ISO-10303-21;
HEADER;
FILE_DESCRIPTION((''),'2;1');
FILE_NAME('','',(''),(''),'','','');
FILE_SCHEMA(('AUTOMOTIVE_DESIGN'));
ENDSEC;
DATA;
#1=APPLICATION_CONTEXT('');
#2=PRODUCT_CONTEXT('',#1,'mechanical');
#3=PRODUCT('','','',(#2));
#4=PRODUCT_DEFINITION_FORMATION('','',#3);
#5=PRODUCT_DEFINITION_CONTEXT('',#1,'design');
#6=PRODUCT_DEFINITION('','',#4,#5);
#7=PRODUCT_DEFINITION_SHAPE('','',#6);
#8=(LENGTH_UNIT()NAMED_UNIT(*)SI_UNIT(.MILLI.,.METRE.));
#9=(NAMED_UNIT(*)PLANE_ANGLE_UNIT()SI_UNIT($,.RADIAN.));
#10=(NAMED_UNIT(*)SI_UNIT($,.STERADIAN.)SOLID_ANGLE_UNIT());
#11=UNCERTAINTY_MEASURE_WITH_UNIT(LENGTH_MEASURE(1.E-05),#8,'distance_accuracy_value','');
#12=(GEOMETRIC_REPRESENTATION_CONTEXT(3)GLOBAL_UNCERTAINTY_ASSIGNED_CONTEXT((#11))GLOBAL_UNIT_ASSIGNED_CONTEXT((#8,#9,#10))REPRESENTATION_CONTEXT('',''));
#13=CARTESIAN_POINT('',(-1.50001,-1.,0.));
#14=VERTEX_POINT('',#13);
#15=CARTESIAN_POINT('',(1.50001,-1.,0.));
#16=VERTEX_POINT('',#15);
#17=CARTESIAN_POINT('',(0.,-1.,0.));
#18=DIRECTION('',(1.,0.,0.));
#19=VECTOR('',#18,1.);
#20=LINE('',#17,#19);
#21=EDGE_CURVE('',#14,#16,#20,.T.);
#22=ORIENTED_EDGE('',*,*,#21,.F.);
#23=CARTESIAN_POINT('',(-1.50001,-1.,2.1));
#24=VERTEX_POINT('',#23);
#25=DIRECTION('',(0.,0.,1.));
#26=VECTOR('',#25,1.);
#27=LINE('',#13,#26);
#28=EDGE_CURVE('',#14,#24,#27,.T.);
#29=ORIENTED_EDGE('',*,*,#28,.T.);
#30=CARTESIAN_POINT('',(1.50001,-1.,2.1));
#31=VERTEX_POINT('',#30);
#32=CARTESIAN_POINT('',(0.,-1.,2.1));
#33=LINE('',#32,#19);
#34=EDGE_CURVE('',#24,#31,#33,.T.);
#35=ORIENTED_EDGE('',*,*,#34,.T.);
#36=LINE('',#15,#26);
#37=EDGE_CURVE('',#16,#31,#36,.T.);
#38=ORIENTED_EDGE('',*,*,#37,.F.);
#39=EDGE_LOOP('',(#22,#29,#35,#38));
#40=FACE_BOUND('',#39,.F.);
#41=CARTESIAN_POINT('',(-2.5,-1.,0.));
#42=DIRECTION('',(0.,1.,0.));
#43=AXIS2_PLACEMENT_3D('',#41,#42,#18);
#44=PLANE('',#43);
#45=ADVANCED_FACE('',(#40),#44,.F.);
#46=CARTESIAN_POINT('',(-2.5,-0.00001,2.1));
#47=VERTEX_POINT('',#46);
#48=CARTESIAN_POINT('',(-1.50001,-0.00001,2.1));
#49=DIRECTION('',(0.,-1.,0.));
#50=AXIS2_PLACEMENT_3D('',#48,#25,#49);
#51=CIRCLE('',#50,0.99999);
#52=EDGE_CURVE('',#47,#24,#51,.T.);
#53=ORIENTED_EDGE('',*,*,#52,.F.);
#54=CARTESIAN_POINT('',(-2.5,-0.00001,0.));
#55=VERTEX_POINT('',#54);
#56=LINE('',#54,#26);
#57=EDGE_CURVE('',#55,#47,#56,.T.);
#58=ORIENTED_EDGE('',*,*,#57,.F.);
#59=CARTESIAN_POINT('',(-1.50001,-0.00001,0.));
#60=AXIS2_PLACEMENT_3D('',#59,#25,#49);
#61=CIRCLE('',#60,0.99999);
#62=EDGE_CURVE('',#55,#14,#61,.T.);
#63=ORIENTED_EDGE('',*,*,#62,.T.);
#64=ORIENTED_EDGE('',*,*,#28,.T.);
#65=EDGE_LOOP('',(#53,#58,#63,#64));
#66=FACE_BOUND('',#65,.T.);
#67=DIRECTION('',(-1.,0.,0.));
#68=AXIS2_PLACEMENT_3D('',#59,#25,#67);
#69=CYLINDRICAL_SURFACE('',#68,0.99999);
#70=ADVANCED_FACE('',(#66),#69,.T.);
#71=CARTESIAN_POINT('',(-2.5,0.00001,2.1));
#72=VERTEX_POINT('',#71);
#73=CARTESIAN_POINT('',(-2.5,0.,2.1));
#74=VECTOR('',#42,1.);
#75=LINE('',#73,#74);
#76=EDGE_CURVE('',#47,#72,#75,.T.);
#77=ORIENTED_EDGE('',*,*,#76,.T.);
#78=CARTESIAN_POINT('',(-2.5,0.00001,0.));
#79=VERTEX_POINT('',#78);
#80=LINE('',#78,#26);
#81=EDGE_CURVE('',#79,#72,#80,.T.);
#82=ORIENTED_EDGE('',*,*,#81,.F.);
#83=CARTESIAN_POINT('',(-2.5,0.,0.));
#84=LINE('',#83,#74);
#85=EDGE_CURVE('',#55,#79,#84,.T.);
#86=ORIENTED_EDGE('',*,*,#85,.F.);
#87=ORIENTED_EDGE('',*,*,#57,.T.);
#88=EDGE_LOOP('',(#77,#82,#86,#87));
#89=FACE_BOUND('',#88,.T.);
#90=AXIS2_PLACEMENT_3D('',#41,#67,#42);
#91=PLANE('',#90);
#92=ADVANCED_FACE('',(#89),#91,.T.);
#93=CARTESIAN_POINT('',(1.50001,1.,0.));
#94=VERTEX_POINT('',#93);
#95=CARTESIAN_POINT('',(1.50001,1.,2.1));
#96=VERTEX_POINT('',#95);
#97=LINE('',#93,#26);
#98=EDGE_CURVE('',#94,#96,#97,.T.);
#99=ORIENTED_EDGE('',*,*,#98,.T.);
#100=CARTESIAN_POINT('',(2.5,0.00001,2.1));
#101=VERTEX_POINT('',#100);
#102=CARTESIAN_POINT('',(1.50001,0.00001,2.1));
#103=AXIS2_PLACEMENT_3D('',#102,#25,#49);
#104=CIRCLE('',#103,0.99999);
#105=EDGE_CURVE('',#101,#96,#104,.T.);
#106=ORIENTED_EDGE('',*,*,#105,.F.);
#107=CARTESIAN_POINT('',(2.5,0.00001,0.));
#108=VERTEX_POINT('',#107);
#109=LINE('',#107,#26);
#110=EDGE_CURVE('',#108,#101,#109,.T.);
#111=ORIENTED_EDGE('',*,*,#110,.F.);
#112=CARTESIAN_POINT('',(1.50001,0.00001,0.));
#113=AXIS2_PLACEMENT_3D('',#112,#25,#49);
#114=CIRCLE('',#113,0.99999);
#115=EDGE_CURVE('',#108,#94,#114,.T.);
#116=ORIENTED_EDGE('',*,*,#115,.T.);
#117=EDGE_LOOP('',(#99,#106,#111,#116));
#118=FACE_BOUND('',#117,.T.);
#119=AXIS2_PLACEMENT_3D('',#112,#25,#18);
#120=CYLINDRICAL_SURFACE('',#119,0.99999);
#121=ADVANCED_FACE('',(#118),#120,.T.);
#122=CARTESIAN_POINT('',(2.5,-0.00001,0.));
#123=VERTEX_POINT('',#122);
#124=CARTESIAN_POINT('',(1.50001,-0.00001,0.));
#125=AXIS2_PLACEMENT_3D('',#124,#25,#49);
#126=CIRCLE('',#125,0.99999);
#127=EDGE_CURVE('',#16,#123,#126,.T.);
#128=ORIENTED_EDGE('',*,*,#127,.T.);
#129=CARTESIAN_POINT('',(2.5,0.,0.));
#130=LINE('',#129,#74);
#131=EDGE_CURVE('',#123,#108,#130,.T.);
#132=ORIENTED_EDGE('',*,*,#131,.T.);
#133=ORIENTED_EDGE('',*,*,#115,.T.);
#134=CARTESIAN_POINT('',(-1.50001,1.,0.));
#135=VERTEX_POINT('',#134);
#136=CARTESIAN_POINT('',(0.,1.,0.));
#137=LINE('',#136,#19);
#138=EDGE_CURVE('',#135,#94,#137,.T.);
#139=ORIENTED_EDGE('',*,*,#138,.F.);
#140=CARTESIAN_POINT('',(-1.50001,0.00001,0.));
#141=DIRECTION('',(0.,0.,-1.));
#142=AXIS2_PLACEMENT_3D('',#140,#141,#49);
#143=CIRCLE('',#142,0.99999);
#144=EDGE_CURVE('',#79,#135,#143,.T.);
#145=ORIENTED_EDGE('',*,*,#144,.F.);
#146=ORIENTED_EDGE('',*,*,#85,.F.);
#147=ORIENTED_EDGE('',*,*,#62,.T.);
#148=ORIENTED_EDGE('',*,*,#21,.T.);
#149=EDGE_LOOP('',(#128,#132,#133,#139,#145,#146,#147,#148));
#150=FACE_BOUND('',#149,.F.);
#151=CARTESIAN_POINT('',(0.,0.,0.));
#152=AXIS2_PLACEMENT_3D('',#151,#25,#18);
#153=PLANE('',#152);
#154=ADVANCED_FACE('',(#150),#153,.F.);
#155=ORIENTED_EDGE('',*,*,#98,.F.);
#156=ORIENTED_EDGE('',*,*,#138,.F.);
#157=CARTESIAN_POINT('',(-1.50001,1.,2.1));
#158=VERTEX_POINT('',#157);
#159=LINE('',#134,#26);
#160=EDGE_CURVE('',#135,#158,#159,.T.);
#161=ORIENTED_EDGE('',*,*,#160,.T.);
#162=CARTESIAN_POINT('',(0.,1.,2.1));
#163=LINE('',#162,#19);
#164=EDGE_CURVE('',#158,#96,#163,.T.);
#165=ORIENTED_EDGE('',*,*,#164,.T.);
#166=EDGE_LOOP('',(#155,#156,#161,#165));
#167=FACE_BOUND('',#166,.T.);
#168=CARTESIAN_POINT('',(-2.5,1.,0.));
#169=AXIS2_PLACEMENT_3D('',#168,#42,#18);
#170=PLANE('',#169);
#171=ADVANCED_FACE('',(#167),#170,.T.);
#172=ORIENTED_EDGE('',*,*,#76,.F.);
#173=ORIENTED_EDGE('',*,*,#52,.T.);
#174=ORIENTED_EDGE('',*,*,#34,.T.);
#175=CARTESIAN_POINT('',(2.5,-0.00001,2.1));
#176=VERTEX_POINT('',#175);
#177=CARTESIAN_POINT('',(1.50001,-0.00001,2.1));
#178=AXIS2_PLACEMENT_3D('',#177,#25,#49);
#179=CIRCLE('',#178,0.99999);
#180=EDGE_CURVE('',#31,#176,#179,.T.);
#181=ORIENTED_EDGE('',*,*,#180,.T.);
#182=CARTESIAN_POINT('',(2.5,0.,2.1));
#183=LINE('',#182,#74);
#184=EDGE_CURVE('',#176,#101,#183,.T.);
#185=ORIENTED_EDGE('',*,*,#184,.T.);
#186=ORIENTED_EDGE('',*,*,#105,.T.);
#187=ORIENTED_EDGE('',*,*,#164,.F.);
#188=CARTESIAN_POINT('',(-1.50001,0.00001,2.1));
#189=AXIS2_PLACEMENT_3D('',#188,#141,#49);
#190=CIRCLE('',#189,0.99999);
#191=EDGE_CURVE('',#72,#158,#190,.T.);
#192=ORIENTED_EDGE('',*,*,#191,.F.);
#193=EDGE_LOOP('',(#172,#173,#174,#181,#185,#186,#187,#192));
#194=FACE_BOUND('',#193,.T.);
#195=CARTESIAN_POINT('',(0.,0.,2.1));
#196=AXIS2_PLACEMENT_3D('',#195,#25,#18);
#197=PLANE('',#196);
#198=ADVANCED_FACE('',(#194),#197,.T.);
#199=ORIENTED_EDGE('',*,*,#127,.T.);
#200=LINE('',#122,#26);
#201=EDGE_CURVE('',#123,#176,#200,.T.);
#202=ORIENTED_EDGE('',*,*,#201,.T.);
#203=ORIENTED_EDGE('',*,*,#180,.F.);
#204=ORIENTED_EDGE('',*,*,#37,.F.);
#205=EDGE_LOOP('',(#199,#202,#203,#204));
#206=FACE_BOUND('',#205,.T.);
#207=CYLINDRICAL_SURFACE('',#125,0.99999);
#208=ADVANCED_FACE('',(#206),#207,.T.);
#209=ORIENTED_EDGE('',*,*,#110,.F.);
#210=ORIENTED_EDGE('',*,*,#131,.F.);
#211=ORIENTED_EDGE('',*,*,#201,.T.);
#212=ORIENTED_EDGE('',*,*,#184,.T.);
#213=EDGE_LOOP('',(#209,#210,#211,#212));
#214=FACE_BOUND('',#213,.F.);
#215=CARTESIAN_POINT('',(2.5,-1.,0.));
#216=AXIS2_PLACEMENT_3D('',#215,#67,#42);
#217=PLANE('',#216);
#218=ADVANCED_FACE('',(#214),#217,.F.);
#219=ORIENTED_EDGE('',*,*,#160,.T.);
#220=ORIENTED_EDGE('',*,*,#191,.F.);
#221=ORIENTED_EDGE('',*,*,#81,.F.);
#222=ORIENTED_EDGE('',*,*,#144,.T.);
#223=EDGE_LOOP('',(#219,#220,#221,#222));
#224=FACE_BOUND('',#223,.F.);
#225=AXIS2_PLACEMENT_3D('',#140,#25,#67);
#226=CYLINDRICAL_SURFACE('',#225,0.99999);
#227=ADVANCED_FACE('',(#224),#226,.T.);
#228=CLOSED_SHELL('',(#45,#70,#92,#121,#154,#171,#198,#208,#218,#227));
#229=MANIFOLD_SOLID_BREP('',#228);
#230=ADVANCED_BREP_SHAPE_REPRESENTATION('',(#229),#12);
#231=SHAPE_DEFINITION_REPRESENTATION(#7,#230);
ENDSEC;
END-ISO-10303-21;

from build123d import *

# Parameters (mm, degrees)
F0_W     = 5
F0_H     = 2
F1_DEPTH = 2.1
F2_R     = 0.99999


# Not quite as in the source:
# - a fillet or chamfer is up to 0.001 mm smaller than in the source, because OpenCascade refuses the exact size


with BuildPart() as f1:
    # F0 (on Top) → F1 (new body)
    with BuildSketch(Plane.XY):
        Rectangle(F0_W, F0_H)
    extrude(amount=F1_DEPTH)

    # F2 (radius 1 in the source; OpenCascade refuses exactly that, so slightly less here)
    f2_edges = [f1.edges().sort_by_distance(p)[0] for p in [
        (2.5, 1, 1.05),
        (2.5, -1, 1.05),
        (-2.5, -1, 1.05),
        (-2.5, 1, 1.05),
    ]]
    fillet(f2_edges, radius=F2_R)


solid = f1.part
